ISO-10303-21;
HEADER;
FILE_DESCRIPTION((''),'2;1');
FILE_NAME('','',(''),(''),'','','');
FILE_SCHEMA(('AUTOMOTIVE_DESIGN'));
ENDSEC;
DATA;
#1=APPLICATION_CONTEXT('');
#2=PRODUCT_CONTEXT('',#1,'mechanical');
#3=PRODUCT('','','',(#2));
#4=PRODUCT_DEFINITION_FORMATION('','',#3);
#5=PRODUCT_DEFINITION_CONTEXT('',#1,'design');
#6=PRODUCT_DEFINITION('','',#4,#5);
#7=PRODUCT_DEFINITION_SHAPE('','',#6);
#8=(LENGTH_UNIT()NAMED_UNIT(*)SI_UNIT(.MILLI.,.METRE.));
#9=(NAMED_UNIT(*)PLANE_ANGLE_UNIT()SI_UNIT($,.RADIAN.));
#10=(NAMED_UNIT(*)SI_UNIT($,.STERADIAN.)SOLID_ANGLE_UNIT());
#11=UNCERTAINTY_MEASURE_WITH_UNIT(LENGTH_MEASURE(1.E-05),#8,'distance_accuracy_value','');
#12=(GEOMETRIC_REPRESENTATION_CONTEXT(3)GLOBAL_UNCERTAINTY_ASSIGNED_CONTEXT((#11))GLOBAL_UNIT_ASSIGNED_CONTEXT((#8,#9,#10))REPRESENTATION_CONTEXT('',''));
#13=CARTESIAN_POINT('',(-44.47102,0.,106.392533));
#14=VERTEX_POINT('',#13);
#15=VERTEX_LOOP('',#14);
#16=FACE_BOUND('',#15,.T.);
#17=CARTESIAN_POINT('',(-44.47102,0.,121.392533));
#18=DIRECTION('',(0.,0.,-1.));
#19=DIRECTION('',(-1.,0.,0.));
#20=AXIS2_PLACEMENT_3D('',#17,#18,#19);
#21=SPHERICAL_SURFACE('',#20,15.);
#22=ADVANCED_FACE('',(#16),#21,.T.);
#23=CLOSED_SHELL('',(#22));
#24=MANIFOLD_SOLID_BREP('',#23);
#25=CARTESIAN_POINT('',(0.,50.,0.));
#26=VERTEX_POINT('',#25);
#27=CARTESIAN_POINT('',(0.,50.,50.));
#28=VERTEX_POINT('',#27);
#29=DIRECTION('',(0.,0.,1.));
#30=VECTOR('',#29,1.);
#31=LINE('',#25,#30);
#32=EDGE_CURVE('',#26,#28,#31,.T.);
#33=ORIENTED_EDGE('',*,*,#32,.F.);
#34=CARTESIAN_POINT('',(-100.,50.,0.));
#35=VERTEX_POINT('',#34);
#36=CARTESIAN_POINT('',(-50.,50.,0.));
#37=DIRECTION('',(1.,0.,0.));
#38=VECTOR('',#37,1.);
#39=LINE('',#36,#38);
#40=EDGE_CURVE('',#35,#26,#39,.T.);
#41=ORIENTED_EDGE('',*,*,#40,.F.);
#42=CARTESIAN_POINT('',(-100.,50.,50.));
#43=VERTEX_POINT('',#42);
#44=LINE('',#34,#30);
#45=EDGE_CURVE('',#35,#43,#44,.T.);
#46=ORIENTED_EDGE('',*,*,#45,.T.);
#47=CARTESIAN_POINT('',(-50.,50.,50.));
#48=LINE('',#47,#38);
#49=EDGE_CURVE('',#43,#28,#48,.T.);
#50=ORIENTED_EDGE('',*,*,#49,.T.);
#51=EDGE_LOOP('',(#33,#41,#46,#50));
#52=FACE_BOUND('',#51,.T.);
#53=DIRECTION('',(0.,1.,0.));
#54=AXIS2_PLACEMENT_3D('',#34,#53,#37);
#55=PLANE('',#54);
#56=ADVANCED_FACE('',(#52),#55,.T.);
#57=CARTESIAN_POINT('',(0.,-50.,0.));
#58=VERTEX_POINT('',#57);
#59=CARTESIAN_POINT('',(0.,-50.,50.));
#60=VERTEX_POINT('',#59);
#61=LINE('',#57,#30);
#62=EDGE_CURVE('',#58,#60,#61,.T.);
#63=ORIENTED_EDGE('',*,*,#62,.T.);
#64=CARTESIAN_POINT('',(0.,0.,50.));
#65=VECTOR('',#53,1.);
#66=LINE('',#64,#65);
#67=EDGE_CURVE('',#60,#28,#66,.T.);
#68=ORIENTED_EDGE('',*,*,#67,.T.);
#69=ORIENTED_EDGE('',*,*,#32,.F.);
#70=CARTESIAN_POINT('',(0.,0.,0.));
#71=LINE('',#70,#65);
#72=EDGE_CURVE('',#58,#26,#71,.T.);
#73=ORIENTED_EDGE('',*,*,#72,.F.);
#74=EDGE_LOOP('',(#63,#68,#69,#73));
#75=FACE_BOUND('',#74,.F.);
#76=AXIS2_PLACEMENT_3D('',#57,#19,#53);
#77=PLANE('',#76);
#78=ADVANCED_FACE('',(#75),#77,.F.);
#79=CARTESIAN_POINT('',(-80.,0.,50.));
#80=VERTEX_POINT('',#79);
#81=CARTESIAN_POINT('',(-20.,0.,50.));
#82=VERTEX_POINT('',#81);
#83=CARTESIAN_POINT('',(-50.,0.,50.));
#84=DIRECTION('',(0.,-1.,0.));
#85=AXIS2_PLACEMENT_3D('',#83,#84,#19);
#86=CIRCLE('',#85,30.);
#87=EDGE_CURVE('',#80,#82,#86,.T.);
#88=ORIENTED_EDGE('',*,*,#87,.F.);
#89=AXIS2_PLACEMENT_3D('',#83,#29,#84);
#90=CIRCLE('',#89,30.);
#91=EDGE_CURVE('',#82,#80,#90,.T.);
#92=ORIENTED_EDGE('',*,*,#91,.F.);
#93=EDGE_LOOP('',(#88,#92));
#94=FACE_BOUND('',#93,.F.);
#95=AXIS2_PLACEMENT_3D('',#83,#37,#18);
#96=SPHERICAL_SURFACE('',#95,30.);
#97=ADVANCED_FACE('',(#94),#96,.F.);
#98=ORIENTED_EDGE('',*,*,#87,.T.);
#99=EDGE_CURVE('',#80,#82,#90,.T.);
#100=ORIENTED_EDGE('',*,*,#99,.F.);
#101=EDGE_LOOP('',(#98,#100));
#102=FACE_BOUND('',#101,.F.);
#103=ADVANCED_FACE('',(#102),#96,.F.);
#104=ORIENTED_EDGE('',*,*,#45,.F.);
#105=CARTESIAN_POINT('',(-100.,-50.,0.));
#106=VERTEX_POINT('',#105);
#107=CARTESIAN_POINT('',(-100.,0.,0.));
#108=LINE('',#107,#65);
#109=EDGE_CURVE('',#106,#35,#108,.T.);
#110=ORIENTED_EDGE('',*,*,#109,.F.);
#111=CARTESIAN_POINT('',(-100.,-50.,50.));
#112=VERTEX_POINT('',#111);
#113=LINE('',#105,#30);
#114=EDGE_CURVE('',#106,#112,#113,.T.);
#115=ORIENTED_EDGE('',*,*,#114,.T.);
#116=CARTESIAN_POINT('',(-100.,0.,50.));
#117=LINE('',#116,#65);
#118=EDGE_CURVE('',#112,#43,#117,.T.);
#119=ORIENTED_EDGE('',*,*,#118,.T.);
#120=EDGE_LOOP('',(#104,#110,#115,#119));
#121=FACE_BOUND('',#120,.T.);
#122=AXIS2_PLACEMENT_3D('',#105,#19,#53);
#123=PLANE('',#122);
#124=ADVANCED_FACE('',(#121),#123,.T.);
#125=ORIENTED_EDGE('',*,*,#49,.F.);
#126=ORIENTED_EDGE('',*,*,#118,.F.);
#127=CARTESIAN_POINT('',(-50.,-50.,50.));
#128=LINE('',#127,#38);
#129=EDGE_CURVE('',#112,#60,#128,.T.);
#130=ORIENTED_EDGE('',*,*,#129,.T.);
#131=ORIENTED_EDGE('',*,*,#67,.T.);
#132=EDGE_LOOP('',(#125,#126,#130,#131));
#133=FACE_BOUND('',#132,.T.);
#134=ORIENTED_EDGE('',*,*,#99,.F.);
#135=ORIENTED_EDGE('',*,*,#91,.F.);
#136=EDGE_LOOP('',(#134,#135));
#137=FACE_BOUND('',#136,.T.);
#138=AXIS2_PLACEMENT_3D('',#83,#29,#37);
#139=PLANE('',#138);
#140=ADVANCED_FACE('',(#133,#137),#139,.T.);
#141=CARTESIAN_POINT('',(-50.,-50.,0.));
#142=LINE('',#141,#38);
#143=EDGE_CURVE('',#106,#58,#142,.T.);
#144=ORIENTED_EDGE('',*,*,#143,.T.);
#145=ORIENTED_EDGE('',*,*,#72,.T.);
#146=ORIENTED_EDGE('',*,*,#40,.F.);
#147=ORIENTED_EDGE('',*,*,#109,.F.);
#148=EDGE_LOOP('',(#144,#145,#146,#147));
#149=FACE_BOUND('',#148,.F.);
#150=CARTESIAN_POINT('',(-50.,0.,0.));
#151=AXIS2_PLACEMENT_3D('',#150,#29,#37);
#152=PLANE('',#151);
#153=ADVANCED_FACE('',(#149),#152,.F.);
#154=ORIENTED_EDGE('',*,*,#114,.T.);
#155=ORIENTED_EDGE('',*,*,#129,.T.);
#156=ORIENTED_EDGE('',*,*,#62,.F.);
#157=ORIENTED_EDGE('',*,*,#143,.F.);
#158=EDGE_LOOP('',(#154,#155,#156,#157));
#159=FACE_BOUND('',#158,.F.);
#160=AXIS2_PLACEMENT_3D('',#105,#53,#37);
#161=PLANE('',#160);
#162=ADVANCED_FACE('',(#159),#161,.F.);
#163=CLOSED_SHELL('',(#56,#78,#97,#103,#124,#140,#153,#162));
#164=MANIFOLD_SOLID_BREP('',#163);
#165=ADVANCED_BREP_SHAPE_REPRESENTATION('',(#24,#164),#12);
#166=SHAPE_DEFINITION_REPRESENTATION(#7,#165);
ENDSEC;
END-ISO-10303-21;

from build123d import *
from build123d import SkipClean  # not in build123d's __all__

# Parameters (mm, degrees)
F0_W     = 100
F0_H     = 100
F1_DEPTH = 50


with BuildPart() as f1:
    # F0 (on Top) → F1 (new body)
    with BuildSketch(Plane.XY):
        with Locations((-50, 0)):
            Rectangle(F0_W, F0_H)
    extrude(amount=F1_DEPTH)

    # F2 (on Front) → F3 (revolve, cut)
    with BuildSketch(Plane.XZ):
        with BuildLine():
            Line((-20, 50), (-80, 50))
            ThreePointArc((-80, 50), (-50, 20), (-20, 50))
        make_face()
    with SkipClean():  # cleaning this boolean's faces spoils the solid; the shape is the same uncleaned
        revolve(axis=Axis((-50, 0, 50), (1, 0, 0)), mode=Mode.SUBTRACT)


with BuildPart() as f6:
    # F5 (on Front) → F6 (revolve)
    with BuildSketch(Plane.XZ):
        with BuildLine():
            Line((-44.4710201616, 106.3925326908), (-44.4710201616, 136.3925326908))
            ThreePointArc((-44.4710201616, 136.3925326908), (-59.4710201616, 121.3925326908), (-44.4710201616, 106.3925326908))
        make_face()
    revolve(axis=Axis((-44.4710201616, 0, 121.3925326908), (0, 0, -1)))


solid = Compound([f1.part, f6.part])
